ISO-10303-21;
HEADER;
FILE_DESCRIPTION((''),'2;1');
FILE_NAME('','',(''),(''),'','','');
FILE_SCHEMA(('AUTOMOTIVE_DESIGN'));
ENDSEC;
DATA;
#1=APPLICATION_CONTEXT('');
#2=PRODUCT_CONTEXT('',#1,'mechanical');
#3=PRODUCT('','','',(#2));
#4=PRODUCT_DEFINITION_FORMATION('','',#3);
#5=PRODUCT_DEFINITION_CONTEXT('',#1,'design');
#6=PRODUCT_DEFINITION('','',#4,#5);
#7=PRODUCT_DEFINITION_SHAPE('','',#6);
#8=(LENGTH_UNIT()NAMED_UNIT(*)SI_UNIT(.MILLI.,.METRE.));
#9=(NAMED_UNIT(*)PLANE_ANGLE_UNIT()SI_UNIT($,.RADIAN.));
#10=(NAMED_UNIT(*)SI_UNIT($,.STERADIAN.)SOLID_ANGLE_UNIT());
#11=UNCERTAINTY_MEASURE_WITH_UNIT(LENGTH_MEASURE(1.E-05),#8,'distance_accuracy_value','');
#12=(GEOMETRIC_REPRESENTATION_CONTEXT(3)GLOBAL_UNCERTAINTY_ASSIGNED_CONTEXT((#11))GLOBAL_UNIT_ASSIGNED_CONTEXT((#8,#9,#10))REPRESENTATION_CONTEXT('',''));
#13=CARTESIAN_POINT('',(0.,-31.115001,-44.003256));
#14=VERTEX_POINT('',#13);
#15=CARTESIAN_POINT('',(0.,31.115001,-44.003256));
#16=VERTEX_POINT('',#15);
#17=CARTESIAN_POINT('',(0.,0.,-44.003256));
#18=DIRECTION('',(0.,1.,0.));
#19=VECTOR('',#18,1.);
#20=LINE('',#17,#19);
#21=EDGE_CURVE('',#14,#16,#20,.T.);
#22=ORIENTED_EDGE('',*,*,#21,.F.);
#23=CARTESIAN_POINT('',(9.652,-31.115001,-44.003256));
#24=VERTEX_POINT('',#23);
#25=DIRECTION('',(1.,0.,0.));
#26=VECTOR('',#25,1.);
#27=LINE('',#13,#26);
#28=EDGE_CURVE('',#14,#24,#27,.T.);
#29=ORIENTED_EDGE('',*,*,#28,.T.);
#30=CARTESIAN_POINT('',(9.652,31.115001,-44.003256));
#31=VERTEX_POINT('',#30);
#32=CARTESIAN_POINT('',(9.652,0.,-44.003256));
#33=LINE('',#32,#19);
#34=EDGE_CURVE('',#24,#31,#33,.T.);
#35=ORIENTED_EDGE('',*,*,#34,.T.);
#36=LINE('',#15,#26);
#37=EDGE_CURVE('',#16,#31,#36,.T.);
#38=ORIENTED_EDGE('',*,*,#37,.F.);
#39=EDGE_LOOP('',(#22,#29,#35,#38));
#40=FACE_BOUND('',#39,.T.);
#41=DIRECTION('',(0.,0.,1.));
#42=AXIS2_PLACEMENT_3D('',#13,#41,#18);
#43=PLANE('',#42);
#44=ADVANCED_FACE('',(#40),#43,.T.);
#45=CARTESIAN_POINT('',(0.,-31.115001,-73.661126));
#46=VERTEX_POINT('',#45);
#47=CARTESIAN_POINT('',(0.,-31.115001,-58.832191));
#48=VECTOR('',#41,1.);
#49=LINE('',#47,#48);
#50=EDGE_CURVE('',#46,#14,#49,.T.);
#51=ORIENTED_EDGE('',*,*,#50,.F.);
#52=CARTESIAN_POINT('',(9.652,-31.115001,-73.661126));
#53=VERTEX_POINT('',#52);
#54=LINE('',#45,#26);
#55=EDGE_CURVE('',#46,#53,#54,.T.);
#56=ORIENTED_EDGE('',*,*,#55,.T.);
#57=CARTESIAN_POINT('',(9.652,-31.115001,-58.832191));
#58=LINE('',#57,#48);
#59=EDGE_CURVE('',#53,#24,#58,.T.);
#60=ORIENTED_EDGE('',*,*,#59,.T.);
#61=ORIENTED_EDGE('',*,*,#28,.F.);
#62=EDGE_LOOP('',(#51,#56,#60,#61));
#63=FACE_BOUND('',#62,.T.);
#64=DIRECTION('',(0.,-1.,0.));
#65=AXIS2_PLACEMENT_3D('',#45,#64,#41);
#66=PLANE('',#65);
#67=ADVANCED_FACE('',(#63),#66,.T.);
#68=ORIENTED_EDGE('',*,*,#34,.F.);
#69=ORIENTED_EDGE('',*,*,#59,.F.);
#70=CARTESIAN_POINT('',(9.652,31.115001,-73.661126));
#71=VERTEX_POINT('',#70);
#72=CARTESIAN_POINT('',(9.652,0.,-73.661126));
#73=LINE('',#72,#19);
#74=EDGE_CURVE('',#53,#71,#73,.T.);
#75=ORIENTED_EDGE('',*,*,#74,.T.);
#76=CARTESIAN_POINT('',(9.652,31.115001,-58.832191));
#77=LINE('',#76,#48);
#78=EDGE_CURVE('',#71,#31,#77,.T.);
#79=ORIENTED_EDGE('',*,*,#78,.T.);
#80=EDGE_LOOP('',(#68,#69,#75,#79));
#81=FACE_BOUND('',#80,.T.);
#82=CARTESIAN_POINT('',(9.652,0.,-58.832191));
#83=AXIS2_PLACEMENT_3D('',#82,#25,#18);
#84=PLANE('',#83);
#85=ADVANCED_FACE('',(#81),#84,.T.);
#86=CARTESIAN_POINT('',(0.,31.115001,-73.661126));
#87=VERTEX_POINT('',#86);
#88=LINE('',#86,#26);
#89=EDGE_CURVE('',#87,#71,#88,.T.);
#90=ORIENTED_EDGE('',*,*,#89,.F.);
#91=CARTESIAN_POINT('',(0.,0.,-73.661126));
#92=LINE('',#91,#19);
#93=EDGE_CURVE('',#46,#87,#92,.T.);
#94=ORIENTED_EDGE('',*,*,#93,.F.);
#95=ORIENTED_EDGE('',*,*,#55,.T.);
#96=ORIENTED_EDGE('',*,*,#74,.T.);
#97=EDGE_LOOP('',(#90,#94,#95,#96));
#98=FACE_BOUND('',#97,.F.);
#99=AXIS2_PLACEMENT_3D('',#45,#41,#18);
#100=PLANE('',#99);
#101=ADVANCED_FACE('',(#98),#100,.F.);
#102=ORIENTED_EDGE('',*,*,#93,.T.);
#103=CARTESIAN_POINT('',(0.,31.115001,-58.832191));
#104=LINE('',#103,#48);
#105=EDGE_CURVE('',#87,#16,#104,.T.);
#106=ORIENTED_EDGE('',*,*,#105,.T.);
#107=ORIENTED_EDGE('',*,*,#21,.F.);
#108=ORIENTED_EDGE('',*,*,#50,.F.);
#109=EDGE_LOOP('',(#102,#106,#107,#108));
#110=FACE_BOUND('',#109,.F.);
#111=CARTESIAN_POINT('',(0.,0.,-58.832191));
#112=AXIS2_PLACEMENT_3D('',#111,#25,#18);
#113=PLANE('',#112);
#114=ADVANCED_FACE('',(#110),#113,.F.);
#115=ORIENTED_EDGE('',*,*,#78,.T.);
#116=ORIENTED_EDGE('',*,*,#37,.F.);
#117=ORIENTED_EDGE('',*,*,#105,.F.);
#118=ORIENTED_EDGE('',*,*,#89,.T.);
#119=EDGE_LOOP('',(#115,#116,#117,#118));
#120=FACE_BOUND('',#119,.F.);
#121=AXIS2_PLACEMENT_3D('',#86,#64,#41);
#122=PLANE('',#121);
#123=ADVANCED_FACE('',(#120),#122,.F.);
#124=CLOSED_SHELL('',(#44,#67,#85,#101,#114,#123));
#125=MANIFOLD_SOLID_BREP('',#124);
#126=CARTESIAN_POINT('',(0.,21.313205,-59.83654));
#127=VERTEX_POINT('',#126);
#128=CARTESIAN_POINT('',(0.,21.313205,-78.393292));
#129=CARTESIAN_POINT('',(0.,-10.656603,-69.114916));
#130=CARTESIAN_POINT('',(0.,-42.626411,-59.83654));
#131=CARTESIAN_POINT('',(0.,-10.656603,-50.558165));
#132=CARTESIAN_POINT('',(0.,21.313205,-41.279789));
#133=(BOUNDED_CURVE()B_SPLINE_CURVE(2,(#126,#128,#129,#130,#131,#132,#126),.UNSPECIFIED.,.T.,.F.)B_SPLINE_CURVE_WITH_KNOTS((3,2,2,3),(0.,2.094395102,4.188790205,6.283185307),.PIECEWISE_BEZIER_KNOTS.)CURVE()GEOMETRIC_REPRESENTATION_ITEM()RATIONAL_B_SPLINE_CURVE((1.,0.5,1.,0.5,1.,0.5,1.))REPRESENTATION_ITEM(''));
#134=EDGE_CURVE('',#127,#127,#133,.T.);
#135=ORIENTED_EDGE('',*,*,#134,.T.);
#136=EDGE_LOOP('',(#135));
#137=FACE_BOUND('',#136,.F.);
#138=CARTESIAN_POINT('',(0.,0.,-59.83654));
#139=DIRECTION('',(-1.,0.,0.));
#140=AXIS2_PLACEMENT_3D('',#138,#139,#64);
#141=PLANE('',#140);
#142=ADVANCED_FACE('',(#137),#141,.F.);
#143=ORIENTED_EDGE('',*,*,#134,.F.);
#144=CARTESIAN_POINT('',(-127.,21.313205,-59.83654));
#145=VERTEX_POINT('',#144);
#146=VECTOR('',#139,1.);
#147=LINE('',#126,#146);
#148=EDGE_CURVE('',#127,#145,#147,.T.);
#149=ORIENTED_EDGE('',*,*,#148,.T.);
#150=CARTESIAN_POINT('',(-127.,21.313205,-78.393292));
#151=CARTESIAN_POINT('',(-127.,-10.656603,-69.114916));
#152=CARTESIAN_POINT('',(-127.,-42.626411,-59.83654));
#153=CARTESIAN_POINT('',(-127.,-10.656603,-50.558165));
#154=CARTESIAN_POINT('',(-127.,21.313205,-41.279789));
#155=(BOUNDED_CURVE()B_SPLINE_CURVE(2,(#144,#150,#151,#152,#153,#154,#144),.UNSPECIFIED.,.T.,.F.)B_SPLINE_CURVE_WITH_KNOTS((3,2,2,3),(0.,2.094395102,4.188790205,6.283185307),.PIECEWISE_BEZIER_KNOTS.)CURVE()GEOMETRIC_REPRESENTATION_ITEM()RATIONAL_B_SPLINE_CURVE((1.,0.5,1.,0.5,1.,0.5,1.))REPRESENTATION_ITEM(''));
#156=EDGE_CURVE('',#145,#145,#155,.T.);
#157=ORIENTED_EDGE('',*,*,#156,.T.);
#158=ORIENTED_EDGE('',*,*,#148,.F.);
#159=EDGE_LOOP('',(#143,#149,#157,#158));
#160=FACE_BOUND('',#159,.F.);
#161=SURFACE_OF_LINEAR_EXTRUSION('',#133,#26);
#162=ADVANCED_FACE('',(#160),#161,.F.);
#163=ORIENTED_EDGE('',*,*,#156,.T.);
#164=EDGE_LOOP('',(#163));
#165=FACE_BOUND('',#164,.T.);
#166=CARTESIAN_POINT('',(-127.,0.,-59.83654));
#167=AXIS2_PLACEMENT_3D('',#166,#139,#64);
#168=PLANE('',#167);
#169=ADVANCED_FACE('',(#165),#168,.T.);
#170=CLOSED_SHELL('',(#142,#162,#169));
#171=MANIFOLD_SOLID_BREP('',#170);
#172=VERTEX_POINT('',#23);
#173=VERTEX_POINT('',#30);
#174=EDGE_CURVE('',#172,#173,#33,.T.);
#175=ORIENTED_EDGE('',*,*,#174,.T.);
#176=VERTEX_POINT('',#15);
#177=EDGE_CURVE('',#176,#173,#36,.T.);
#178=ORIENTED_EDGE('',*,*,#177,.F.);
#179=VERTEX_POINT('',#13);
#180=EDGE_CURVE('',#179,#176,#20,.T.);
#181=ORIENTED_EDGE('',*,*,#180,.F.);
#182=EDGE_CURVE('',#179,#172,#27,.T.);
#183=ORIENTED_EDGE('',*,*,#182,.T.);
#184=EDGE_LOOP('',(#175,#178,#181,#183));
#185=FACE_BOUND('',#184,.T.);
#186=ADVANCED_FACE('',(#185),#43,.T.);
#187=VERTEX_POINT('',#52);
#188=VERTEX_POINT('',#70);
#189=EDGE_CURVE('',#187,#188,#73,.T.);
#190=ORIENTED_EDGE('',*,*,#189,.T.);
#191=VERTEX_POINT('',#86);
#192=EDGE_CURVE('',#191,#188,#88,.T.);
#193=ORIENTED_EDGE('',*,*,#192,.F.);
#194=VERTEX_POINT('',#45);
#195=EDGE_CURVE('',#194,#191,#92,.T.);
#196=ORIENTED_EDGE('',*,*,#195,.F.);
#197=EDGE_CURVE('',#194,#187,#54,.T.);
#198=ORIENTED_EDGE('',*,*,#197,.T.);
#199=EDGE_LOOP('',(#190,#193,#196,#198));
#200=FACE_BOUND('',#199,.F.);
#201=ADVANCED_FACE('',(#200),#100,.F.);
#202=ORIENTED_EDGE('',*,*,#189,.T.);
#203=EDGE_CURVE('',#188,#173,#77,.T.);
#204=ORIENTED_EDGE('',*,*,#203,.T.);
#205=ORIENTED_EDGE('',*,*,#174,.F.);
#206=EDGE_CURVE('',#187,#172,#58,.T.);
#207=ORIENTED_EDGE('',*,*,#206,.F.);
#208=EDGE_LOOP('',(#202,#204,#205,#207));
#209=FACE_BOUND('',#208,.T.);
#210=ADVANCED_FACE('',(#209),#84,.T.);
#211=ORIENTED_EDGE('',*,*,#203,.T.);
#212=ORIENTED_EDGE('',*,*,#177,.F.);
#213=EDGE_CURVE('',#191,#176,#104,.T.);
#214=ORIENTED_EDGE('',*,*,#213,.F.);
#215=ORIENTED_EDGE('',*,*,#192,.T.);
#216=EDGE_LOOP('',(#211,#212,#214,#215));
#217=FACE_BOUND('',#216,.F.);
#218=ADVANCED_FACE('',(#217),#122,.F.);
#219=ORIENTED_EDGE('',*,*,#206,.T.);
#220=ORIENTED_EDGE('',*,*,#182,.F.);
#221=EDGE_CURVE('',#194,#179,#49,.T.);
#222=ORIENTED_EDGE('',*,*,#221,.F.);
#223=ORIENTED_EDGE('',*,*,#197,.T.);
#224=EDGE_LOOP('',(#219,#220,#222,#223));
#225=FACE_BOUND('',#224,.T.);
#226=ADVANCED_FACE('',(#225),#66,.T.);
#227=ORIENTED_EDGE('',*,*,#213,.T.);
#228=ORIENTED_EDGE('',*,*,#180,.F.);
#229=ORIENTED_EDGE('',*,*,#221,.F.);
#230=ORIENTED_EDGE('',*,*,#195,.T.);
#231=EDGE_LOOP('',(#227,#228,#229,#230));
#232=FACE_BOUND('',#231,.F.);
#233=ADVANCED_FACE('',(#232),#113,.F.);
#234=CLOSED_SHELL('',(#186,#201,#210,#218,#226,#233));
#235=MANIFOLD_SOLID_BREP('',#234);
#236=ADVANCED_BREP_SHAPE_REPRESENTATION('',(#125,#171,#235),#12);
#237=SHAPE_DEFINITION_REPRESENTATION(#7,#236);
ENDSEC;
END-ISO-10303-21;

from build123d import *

# Parameters (mm, degrees)
F1_W     = 62.230002135
F1_H     = 29.6578705311
F2_DEPTH = 9.652
F0_W     = 62.230002135
F0_H     = 29.6578705311
F4_DEPTH = 127


# Not quite as in the source:
# - the program builds the solid bodies; features that only make, move or delete a surface that nothing else refers to are left out


with BuildPart() as f2:
    # F1 (on face) → F2 (new body)
    with BuildSketch(Plane.YZ):
        with Locations((0, -58.8321909308)):
            Rectangle(F1_W, F1_H)
    extrude(amount=F2_DEPTH)


with BuildPart() as f2b:
    # F0 (on Right) → F2, piece 2 (new body)
    with BuildSketch(Plane.YZ):
        with Locations((0, -58.8321909308)):
            Rectangle(F0_W, F0_H)
    extrude(amount=F2_DEPTH)


with BuildPart() as f4:
    # F3 (on face) → F4 (new body)
    with BuildSketch(Plane(origin=(0, 0, 0), x_dir=(0, -1, 0), z_dir=(-1, 0, 0))):
        with BuildLine():
            add(Edge.make_bspline(
                [(-21.3132053614, -59.8365403712), (-21.3132053614, -78.3932916774), (10.6566026807, -69.1149160243), (42.6264107227, -59.8365403712), (10.6566026807, -50.558164718), (-21.3132053614, -41.2797890649), (-21.3132053614, -59.8365403712)],
                knots=[0, 0, 0, 2.0943951024, 2.0943951024, 4.1887902048, 4.1887902048, 6.2831853072, 6.2831853072, 6.2831853072], degree=2, weights=[1, 0.5, 1, 0.5, 1, 0.5, 1]))
        make_face()
    extrude(amount=F4_DEPTH)


solid = Compound([f2.part, f2b.part, f4.part])
